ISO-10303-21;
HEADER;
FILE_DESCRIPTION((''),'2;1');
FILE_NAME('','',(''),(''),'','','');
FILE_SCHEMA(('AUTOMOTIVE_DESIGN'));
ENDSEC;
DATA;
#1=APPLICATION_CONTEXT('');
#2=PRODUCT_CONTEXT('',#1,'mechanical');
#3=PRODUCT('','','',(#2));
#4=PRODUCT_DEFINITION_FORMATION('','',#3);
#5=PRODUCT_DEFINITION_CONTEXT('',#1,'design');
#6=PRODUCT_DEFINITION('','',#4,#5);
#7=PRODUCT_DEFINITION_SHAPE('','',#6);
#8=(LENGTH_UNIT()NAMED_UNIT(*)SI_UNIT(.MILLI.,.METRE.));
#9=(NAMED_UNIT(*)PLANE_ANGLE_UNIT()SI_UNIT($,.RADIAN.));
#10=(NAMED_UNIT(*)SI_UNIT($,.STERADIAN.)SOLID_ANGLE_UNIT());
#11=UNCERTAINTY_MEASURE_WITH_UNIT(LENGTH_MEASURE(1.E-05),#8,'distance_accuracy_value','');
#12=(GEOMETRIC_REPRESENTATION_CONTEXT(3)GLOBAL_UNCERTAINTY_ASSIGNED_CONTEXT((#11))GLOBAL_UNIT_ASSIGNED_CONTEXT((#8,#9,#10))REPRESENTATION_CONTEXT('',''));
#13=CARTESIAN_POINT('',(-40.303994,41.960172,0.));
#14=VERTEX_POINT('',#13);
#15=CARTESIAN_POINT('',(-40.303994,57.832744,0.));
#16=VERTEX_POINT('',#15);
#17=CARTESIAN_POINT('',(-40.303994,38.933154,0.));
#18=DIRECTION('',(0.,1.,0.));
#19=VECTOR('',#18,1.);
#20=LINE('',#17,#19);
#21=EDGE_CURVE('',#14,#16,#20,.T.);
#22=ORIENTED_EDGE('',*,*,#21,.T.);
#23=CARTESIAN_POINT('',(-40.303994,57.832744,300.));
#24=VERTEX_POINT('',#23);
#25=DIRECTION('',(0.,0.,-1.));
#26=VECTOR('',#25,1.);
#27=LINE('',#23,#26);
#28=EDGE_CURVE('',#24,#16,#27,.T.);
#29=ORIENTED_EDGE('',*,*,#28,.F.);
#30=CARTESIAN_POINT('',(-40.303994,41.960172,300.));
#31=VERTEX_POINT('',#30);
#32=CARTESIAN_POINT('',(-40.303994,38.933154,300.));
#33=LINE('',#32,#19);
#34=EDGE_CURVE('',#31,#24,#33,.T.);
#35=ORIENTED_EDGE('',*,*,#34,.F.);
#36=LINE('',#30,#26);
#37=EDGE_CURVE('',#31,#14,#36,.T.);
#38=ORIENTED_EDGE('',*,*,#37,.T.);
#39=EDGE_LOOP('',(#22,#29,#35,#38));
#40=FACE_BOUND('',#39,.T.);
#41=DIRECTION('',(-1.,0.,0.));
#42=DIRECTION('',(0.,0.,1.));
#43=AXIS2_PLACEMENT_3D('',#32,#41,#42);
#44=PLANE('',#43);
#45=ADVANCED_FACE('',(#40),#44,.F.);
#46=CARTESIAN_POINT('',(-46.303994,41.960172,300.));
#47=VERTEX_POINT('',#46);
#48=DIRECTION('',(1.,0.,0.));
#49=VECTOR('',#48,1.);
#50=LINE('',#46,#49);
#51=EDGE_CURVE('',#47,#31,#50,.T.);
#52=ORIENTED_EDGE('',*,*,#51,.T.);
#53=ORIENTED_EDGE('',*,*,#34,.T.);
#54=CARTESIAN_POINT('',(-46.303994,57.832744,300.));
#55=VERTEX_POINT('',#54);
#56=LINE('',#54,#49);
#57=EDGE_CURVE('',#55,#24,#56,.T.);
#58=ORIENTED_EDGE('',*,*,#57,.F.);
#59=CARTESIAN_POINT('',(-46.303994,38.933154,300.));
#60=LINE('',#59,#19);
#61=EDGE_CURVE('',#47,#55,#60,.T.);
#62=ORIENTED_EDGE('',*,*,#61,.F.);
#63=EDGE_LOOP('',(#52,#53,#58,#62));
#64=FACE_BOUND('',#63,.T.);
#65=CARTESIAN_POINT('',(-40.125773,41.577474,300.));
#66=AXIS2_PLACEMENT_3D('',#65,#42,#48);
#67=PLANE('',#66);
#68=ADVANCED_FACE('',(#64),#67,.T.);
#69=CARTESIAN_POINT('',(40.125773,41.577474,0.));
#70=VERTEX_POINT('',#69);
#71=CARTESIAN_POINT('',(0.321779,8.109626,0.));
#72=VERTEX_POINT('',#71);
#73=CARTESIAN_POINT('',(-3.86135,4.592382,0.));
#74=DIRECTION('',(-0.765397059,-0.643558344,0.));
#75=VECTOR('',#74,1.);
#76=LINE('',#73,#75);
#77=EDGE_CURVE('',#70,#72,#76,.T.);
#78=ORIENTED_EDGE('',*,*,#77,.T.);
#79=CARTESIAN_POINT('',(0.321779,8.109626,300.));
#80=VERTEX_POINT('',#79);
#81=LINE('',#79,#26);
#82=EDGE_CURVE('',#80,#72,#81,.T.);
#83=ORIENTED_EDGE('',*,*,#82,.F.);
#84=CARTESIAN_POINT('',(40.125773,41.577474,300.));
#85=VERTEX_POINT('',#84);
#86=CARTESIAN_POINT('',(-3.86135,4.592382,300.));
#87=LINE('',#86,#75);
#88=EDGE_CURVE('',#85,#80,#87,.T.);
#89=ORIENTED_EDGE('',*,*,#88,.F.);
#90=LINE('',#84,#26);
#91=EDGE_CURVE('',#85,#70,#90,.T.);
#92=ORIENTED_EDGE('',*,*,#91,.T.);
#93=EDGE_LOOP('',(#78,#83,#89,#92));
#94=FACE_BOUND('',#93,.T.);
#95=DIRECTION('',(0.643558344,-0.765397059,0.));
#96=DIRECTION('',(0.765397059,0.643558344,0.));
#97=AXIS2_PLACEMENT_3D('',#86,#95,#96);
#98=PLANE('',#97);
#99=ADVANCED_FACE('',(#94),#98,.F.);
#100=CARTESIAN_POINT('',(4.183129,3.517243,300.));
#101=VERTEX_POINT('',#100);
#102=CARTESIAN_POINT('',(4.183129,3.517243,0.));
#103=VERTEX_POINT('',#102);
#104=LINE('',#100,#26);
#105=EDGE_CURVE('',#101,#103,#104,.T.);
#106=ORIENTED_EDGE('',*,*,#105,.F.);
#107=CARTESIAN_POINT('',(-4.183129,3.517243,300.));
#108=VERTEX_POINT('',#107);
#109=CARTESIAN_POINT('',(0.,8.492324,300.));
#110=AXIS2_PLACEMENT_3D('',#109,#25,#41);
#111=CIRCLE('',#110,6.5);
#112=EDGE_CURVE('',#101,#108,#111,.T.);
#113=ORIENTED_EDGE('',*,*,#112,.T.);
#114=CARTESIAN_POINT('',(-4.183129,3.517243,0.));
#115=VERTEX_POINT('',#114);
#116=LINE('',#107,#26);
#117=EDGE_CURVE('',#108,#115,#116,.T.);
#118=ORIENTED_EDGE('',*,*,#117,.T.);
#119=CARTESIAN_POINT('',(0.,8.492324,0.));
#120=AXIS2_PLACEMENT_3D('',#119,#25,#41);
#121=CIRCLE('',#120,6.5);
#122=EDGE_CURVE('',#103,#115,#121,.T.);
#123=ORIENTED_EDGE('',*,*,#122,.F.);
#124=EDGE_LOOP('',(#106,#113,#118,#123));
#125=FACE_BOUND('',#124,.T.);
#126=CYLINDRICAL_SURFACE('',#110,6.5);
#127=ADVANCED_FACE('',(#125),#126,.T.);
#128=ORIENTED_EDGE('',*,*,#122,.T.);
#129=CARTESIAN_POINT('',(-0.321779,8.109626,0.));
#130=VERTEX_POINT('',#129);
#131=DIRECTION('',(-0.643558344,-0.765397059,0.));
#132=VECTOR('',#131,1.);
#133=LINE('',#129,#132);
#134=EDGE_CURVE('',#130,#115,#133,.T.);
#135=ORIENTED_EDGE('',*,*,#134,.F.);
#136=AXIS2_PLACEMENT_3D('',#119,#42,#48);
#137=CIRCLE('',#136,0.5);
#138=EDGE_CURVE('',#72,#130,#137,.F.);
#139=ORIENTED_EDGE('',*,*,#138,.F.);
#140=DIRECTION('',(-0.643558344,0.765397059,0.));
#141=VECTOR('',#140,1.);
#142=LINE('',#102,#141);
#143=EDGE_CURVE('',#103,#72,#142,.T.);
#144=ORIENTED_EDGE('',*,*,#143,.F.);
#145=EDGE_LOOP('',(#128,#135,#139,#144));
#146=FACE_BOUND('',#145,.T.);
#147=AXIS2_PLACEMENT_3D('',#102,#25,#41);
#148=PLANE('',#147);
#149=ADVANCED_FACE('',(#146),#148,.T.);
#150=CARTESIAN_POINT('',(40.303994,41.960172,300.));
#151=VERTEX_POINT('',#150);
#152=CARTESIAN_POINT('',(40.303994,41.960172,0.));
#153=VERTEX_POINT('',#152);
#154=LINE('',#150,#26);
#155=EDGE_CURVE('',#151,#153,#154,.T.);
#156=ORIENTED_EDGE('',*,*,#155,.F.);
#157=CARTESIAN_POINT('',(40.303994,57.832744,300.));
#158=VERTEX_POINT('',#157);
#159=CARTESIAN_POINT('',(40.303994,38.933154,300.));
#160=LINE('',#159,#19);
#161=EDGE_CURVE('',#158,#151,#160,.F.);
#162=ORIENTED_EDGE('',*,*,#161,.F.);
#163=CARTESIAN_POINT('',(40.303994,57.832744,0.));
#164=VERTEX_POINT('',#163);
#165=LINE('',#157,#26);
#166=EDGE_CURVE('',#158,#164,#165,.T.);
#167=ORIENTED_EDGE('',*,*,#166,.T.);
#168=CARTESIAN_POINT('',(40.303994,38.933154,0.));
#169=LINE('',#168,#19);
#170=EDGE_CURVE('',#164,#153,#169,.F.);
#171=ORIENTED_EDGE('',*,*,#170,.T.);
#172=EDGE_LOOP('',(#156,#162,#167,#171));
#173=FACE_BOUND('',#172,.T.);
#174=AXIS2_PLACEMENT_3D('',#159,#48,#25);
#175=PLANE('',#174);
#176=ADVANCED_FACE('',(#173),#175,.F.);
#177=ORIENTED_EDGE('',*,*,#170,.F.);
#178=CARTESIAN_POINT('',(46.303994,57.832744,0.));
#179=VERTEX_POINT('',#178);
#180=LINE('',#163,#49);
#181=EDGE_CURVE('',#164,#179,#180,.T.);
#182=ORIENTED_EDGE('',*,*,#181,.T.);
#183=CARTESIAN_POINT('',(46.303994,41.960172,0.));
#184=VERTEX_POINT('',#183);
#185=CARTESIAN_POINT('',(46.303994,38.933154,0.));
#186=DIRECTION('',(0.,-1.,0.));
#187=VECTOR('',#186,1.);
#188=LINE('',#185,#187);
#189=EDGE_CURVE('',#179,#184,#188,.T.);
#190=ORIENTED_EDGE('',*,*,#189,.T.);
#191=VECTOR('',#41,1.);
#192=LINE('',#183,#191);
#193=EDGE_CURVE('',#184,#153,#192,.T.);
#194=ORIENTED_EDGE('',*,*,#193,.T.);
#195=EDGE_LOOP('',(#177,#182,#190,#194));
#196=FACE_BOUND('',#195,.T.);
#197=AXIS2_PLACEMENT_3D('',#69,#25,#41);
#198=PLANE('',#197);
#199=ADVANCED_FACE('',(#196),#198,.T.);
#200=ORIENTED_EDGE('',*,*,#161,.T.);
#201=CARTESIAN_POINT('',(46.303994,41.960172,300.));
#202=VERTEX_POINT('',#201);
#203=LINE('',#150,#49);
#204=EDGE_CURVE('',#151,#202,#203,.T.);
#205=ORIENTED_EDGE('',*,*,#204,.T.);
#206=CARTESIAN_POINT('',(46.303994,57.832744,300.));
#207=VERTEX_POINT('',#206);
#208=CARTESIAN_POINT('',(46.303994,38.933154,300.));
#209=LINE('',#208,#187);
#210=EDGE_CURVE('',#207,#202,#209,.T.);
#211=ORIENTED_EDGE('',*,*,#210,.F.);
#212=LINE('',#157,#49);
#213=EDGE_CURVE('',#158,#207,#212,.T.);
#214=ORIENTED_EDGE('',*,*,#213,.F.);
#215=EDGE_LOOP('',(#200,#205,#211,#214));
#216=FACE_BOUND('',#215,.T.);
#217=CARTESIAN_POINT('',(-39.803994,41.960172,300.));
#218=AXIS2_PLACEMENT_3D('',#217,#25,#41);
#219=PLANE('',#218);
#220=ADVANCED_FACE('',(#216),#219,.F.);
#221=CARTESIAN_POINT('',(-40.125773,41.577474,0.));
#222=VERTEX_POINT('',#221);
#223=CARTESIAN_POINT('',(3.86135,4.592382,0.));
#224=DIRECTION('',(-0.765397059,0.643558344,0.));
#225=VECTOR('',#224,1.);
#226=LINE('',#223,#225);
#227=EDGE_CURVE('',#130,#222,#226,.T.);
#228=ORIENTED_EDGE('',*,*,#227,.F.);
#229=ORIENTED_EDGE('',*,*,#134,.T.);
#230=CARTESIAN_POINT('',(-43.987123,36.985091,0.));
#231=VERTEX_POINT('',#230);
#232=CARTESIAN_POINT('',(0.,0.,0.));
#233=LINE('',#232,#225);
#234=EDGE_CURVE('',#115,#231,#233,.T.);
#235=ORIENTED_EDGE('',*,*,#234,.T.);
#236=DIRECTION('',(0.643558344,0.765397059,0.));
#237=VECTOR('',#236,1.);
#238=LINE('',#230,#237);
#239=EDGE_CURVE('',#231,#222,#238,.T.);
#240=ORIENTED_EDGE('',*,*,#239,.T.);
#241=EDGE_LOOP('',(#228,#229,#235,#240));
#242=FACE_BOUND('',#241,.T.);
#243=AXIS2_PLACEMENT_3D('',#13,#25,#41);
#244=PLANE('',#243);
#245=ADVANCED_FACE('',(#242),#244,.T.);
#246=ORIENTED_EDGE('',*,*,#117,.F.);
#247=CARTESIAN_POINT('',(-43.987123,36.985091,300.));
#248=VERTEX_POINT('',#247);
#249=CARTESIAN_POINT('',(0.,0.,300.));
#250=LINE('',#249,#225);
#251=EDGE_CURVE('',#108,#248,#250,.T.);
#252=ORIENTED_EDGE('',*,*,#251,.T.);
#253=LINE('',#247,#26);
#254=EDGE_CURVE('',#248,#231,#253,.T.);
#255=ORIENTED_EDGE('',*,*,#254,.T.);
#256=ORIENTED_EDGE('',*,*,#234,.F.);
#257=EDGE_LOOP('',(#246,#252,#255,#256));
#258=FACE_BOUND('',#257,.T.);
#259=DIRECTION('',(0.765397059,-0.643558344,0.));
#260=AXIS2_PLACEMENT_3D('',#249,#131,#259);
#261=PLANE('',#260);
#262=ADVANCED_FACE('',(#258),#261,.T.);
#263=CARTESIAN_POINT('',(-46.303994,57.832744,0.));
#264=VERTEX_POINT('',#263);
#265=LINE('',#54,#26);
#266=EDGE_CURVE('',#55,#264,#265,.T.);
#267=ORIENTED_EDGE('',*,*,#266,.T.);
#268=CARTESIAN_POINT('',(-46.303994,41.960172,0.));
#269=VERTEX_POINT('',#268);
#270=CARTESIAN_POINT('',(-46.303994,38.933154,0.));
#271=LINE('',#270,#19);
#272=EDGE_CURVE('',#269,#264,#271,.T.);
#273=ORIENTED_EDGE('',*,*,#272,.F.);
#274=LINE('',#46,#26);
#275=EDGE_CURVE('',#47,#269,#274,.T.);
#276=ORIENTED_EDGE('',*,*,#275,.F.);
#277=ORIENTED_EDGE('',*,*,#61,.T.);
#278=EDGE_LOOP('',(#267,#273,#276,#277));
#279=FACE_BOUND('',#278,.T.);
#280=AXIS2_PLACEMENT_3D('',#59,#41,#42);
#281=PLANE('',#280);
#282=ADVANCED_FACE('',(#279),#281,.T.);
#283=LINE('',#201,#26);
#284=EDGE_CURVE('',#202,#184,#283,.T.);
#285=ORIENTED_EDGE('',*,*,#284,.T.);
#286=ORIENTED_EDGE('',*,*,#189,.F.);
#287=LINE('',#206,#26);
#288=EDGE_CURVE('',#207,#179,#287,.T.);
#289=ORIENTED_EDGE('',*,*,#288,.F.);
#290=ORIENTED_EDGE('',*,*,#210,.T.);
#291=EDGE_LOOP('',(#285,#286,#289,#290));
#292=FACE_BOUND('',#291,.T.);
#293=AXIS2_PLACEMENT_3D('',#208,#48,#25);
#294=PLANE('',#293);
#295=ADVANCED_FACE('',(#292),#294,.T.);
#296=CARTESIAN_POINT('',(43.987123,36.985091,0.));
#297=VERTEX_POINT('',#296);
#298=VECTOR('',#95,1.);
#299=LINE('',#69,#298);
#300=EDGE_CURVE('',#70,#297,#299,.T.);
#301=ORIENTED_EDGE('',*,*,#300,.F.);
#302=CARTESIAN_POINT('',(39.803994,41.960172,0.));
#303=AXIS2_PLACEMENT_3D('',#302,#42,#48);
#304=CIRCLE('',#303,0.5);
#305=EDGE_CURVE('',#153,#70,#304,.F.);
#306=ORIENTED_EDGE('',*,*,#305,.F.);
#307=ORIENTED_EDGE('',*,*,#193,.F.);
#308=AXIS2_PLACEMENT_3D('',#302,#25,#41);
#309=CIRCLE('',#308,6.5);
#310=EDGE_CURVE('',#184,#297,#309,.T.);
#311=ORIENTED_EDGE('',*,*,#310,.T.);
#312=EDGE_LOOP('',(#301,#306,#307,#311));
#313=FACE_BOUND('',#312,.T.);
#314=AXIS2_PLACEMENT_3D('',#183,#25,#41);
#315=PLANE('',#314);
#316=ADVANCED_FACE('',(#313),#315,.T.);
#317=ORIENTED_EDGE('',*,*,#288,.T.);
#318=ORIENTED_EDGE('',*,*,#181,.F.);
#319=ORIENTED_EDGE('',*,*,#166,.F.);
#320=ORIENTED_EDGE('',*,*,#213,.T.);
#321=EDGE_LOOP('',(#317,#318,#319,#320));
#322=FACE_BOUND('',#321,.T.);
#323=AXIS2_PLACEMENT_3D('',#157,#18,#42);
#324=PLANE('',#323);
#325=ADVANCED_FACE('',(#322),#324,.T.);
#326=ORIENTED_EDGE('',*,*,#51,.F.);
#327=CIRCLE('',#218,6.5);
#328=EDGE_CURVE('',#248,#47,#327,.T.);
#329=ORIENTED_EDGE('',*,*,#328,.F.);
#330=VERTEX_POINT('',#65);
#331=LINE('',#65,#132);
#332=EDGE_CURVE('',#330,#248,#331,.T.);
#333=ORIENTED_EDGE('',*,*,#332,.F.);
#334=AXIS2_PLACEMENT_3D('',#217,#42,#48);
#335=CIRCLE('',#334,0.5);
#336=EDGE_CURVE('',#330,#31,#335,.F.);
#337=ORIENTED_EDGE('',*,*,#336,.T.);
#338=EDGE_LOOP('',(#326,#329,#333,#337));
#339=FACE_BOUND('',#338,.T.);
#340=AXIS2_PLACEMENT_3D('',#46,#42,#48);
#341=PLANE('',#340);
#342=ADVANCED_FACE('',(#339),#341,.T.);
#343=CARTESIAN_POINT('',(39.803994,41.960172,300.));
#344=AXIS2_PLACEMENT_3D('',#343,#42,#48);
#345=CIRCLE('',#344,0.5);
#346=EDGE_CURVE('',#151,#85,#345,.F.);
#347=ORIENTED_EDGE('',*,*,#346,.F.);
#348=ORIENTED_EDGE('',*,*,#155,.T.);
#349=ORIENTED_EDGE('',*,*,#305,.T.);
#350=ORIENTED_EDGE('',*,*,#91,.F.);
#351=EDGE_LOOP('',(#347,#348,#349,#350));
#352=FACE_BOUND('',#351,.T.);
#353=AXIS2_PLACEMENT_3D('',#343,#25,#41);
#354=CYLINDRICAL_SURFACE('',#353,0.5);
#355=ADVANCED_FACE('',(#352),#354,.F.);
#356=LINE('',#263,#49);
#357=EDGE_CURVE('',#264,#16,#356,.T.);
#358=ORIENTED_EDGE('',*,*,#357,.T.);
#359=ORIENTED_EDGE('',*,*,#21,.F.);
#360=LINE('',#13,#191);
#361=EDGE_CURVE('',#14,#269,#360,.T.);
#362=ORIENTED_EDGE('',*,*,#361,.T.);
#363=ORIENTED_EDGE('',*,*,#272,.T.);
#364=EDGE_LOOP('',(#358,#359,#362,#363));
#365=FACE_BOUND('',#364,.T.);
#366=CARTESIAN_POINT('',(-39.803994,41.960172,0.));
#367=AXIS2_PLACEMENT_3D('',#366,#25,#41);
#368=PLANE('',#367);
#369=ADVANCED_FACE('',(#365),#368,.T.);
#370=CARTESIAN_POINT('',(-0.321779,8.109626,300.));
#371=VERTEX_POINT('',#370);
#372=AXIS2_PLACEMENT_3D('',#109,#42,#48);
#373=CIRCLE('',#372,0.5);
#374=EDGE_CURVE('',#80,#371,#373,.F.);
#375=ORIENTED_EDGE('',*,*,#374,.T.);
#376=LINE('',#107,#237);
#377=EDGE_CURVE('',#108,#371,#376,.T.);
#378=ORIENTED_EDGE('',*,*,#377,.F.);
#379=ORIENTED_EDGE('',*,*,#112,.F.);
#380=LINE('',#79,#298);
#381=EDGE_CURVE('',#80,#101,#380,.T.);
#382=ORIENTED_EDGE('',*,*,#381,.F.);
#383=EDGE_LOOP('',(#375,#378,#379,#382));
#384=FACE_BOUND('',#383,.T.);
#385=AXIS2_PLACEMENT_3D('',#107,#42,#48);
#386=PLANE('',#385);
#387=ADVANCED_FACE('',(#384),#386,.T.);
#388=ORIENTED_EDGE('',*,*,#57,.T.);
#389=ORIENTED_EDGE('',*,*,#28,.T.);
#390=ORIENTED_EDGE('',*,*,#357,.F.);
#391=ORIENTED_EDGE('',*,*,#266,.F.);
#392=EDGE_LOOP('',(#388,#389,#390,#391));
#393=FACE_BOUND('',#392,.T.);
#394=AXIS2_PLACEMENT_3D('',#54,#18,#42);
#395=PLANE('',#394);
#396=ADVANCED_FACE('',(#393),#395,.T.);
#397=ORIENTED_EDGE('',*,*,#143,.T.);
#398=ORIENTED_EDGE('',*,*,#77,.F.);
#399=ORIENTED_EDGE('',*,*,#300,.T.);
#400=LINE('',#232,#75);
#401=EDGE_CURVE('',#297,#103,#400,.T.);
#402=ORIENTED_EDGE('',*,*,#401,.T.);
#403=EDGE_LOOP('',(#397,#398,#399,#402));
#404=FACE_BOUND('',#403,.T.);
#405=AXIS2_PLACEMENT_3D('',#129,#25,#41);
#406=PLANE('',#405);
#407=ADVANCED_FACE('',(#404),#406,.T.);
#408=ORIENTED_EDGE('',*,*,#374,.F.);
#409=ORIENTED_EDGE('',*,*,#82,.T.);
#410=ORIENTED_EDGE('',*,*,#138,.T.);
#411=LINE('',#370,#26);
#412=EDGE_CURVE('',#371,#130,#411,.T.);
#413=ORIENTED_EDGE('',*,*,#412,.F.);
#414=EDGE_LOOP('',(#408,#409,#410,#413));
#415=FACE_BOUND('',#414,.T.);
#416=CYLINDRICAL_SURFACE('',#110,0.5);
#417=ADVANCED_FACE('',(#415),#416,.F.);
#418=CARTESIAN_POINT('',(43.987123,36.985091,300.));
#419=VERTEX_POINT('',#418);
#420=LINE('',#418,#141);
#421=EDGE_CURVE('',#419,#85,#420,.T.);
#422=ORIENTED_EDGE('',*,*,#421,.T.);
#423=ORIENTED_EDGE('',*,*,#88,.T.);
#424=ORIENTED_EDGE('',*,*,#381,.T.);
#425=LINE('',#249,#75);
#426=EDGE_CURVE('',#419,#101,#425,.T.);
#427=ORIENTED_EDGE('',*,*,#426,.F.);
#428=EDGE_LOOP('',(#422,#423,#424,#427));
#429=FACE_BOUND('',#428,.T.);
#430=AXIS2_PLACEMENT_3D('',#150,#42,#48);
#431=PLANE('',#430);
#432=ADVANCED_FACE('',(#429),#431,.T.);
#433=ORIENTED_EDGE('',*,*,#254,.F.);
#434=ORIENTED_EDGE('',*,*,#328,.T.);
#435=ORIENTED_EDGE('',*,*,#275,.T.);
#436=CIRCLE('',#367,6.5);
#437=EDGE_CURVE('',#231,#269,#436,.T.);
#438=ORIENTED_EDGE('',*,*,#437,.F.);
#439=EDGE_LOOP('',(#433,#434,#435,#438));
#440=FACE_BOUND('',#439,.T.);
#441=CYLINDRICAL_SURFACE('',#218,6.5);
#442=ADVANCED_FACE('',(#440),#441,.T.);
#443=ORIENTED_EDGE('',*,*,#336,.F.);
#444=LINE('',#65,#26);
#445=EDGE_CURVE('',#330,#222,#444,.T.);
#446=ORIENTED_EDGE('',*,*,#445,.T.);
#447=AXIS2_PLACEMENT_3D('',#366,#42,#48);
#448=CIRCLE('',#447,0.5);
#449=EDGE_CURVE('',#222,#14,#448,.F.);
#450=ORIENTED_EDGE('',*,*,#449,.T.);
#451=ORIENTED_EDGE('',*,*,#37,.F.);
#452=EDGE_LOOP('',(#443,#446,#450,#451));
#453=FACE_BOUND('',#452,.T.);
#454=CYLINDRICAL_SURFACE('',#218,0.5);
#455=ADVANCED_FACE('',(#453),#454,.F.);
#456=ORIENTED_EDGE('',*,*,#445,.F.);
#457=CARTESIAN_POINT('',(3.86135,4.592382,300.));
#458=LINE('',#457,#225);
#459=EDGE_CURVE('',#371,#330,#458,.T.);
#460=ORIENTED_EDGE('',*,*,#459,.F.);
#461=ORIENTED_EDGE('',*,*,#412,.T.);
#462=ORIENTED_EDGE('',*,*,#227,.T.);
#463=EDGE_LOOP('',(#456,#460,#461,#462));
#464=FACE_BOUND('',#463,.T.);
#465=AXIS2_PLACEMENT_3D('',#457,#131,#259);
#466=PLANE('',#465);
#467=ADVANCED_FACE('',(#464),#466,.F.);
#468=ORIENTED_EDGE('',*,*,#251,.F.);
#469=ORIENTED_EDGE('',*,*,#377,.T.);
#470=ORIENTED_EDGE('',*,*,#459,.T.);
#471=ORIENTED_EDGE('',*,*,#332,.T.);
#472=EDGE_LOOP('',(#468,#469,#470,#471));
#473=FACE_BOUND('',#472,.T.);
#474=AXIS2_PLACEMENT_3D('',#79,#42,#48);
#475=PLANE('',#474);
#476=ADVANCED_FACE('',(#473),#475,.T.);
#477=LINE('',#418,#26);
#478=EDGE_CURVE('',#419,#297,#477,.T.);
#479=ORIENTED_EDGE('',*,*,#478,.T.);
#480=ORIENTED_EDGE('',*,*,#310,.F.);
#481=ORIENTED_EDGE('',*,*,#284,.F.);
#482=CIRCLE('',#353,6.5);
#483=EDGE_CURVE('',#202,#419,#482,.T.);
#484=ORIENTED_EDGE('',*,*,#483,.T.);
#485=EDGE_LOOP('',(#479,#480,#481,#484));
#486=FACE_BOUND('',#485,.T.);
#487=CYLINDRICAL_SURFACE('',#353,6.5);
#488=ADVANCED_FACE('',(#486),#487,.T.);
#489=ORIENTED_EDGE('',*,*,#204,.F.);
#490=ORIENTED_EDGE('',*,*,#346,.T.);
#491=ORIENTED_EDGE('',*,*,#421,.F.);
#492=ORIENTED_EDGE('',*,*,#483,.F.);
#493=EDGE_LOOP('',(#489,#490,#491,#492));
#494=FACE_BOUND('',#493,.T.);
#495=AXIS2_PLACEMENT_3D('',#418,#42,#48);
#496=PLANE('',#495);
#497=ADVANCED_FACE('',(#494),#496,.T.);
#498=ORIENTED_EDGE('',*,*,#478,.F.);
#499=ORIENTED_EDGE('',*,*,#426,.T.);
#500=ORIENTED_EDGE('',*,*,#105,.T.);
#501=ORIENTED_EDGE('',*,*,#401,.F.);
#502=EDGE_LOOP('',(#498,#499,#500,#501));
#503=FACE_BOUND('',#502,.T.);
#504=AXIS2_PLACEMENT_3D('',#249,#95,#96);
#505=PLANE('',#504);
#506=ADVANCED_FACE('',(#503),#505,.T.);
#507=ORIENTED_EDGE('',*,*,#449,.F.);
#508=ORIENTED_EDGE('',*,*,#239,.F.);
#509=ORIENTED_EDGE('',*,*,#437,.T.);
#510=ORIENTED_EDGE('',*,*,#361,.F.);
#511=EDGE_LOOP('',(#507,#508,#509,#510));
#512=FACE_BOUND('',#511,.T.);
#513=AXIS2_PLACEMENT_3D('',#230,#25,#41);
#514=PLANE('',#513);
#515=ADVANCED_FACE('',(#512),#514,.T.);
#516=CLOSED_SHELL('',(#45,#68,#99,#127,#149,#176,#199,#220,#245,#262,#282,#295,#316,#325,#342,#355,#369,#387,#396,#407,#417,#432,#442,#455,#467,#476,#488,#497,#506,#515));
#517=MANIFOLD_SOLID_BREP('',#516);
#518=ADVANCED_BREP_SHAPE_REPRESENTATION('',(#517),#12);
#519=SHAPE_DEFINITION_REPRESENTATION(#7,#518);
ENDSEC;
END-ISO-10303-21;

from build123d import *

# Parameters (mm, degrees)
BASE_FLANGE1_DEPTH = 300


# Sheet-metal steps are written as plain solids
with BuildPart() as part:
    # Sketch2 → Base-Flange1 (new body)
    with BuildSketch(Plane.XY):
        with BuildLine():
            Line((46.30399401, 57.832743539), (46.30399401, 41.960172265))
            ThreePointArc((46.30399401, 41.960172265), (45.696376381, 39.216118696), (43.987123244, 36.98509138))
            Line((43.987123244, 36.98509138), (4.183129234, 3.517243356))
            ThreePointArc((4.183129234, 3.517243356), (0, 1.992324241), (-4.183129234, 3.517243356))
            Line((-4.183129234, 3.517243356), (-43.987123244, 36.98509138))
            ThreePointArc((-43.987123244, 36.98509138), (-45.696376381, 39.216118696), (-46.30399401, 41.960172265))
            Line((-46.30399401, 41.960172265), (-46.30399401, 57.832743539))
            Line((-46.30399401, 57.832743539), (-40.30399401, 57.832743539))
            Line((-40.30399401, 57.832743539), (-40.30399401, 41.960172265))
            ThreePointArc((-40.30399401, 41.960172265), (-40.257254192, 41.749091222), (-40.125773182, 41.577473736))
            Line((-40.125773182, 41.577473736), (-0.321779172, 8.109625711))
            ThreePointArc((-0.321779172, 8.109625711), (0, 7.992324241), (0.321779172, 8.109625711))
            Line((0.321779172, 8.109625711), (40.125773182, 41.577473736))
            ThreePointArc((40.125773182, 41.577473736), (40.257254192, 41.749091222), (40.30399401, 41.960172265))
            Line((40.30399401, 41.960172265), (40.30399401, 57.832743539))
            Line((40.30399401, 57.832743539), (46.30399401, 57.832743539))
        make_face()
    extrude(amount=BASE_FLANGE1_DEPTH)


solid = part.part
